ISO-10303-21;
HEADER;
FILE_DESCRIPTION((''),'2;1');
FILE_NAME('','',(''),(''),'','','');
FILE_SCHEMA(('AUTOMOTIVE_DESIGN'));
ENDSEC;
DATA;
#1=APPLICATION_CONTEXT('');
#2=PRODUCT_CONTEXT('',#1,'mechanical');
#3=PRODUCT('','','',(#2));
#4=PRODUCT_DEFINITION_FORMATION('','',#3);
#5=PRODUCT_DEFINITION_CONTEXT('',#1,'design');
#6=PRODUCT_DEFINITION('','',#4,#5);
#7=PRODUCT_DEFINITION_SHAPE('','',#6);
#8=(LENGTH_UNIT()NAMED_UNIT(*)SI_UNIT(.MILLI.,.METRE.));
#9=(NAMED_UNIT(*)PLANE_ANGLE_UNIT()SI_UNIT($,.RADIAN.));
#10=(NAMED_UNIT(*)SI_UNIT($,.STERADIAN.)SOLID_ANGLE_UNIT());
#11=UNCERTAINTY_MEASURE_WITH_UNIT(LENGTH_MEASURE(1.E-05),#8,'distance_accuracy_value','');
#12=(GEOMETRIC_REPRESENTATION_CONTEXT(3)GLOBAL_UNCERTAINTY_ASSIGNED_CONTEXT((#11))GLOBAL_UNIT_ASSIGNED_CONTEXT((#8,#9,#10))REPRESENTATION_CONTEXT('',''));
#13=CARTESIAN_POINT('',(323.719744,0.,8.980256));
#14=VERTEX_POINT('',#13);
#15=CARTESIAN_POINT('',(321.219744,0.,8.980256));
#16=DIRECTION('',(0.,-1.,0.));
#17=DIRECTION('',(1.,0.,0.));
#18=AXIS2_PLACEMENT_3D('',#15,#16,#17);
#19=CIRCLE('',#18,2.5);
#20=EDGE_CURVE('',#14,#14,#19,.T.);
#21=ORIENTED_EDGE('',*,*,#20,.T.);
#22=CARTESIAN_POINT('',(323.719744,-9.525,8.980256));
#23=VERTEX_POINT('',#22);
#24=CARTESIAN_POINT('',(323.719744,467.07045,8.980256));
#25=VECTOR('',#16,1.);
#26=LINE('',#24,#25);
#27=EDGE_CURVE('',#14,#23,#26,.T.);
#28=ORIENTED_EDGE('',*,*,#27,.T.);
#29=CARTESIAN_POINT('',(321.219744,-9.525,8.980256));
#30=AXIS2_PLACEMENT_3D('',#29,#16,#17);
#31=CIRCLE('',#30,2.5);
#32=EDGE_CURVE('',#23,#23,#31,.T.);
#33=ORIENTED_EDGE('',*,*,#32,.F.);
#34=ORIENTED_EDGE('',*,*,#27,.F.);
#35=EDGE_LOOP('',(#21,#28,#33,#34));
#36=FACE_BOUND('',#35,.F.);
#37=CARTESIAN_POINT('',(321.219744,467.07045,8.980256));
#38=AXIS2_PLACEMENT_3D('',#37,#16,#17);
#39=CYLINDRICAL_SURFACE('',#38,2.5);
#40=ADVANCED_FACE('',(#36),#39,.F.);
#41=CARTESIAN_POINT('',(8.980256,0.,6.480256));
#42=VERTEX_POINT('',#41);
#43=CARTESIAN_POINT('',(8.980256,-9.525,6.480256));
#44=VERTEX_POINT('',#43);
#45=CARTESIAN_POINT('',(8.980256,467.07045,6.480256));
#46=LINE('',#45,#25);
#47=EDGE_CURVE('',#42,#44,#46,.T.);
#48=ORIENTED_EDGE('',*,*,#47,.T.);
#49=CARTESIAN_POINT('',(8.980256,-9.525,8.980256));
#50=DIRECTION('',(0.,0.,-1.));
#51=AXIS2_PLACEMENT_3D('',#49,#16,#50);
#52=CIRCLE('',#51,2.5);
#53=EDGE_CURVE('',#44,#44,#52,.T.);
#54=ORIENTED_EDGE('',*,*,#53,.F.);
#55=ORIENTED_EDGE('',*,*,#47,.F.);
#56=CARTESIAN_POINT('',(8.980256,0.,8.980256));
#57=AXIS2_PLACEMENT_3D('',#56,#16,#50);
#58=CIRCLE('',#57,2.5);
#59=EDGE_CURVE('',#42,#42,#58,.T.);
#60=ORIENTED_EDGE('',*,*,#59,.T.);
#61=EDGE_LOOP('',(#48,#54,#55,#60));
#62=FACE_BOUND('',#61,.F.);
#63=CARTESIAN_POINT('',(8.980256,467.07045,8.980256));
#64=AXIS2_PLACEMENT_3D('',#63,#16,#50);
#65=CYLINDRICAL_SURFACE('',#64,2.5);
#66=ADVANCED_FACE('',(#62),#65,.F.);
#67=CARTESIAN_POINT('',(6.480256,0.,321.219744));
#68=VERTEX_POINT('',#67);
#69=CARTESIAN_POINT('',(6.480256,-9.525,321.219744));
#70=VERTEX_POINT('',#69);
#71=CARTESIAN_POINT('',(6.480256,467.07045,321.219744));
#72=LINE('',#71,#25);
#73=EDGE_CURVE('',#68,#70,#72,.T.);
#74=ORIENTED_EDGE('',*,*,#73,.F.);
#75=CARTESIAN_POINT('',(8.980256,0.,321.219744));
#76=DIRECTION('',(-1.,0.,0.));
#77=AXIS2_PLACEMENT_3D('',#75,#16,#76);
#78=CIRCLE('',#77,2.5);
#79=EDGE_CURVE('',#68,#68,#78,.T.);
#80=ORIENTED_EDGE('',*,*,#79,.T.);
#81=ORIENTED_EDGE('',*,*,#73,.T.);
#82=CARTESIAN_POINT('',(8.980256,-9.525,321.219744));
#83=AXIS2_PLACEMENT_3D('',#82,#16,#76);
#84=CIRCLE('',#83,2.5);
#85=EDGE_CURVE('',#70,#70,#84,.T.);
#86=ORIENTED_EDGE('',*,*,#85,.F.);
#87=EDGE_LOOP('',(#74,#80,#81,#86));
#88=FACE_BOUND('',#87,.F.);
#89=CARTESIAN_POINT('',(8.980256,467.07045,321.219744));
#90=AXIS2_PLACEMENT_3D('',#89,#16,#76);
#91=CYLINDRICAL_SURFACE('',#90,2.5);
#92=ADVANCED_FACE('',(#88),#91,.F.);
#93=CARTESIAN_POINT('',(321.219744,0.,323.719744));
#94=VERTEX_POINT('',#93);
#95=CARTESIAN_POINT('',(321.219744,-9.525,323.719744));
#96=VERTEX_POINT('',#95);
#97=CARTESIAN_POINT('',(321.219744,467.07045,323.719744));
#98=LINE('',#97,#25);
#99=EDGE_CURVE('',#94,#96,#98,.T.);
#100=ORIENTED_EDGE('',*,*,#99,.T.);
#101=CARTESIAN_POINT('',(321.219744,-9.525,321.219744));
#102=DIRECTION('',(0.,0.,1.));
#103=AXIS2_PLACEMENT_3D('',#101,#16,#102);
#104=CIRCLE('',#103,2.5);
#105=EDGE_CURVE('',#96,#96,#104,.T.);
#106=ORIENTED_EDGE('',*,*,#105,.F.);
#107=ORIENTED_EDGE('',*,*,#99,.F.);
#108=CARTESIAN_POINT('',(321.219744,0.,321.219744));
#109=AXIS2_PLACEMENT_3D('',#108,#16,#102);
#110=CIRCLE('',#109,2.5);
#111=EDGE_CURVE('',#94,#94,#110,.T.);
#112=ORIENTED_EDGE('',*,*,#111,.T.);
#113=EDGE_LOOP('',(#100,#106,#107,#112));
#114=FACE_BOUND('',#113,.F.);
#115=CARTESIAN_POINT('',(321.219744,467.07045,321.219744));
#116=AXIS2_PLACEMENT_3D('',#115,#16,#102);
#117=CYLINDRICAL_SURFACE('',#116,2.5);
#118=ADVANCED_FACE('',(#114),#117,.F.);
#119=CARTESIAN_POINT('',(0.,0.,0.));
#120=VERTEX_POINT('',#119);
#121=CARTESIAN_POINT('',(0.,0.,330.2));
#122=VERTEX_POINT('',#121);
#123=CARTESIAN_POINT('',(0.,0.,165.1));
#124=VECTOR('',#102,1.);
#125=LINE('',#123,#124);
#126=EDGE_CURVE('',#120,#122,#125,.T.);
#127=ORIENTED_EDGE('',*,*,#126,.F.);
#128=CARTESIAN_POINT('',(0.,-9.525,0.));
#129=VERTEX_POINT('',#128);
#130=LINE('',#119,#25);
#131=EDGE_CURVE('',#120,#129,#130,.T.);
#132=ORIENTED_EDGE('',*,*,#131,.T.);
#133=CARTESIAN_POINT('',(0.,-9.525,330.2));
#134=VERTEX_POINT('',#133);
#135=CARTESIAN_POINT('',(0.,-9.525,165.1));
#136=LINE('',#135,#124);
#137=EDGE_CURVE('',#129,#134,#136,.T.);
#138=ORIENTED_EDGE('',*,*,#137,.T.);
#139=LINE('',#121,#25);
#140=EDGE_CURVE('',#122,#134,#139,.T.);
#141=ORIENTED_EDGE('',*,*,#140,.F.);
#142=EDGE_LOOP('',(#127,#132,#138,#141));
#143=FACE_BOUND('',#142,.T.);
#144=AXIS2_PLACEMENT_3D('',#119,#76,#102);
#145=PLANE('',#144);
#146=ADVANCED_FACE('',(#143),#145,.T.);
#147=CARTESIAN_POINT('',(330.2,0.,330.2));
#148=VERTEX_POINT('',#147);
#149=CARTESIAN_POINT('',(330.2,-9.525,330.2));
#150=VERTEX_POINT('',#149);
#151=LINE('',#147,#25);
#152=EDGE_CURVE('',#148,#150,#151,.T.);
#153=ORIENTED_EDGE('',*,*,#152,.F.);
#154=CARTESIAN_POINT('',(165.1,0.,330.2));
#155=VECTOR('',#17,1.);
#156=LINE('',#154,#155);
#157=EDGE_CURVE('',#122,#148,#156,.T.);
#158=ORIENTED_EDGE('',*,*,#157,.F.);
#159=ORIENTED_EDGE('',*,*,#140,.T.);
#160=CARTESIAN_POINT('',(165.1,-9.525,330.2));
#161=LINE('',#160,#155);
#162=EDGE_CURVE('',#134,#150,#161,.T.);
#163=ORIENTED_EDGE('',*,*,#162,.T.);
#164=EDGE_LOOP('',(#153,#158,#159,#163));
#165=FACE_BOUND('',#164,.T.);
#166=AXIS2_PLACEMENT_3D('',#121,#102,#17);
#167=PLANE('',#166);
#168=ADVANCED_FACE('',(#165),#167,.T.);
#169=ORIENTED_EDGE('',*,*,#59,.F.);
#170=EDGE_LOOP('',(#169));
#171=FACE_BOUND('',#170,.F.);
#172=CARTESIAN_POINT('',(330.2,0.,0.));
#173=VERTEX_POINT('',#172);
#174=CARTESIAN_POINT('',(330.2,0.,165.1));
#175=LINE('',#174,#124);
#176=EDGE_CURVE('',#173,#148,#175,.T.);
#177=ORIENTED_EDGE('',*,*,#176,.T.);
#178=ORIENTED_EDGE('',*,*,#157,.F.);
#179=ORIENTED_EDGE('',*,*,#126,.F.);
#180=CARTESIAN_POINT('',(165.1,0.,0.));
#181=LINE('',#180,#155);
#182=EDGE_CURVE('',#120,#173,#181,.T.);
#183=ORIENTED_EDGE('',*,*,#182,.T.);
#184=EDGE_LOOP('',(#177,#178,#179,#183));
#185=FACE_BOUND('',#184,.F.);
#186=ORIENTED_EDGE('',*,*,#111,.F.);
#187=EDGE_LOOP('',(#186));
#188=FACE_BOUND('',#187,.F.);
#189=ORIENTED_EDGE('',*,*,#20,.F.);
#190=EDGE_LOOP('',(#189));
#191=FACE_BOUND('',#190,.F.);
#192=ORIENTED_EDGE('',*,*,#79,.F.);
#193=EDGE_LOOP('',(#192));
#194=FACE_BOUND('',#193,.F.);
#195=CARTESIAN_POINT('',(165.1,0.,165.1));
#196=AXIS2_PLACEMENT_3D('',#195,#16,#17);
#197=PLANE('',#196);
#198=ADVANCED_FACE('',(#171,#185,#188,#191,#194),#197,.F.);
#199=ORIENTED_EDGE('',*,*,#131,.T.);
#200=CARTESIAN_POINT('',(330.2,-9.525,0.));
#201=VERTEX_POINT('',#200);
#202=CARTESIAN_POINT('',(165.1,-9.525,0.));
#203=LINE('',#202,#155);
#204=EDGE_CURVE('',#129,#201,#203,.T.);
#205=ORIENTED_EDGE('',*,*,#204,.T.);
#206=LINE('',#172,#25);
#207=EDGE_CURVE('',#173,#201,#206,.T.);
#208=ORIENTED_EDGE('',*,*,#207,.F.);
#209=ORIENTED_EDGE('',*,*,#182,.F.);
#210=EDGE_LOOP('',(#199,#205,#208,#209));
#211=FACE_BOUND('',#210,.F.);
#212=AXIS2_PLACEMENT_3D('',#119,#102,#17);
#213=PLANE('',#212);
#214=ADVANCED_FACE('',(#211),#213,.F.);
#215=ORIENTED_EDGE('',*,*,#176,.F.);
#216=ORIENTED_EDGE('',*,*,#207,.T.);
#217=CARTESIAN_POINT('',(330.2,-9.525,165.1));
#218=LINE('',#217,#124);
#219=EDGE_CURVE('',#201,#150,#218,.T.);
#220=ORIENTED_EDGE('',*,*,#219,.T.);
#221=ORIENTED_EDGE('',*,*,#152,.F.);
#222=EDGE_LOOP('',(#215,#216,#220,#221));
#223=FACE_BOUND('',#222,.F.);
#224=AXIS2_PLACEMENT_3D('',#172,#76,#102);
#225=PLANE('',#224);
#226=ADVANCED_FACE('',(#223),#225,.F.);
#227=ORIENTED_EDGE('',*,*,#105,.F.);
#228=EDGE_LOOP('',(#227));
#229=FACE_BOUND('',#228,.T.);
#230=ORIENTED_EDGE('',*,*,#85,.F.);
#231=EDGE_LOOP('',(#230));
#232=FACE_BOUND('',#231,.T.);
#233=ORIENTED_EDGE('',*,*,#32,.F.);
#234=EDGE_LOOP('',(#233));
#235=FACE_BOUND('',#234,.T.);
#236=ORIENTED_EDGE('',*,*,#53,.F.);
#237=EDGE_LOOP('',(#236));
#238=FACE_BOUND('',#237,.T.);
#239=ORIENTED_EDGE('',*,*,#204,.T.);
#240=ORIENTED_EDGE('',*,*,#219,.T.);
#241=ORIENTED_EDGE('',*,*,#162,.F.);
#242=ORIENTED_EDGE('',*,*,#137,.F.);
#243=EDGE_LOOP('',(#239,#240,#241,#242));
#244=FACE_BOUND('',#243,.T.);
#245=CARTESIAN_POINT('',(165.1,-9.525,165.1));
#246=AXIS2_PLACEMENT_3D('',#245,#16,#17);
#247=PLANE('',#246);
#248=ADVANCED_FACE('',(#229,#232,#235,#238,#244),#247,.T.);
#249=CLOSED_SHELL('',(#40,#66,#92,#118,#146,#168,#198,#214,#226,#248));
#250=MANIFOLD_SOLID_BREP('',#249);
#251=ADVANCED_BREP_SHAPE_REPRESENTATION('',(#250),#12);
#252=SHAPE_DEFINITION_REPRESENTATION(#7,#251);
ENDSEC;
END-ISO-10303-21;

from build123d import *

# Parameters (mm, degrees)
F0_W            = 330.2
F0_H            = 330.2
F1_DEPTH        = 9.525
F3_D            = 5
F3_COPIES_COUNT = 4


# Not quite as in the source:
# - a pattern or mirror of a feature is missing from the dataset's text; its kind, count and spacing are read off the source's solid


with BuildPart() as f1:
    # F0 (on Front) → F1 (new body)
    with BuildSketch(Plane.XZ):
        with Locations((165.1, 165.1)):
            Rectangle(F0_W, F0_H)
    extrude(amount=F1_DEPTH)

    # F3 (through all)
    with Locations(Plane(origin=(0, 0, 0), x_dir=(-1, 0, 0), z_dir=(0, 1, 0))):
        with Locations((-321.2197438789, 8.9802561211)):
            f3 = Hole(F3_D / 2)

    # F3_copies: F3 ×4 about axis
    f3_copies_axis = Axis((165.1, 0, 165.1), (0, 1, 0))
    for i in range(1, F3_COPIES_COUNT):
        add(f3.rotate(f3_copies_axis, i * 360 / F3_COPIES_COUNT), mode=Mode.SUBTRACT)


solid = f1.part
